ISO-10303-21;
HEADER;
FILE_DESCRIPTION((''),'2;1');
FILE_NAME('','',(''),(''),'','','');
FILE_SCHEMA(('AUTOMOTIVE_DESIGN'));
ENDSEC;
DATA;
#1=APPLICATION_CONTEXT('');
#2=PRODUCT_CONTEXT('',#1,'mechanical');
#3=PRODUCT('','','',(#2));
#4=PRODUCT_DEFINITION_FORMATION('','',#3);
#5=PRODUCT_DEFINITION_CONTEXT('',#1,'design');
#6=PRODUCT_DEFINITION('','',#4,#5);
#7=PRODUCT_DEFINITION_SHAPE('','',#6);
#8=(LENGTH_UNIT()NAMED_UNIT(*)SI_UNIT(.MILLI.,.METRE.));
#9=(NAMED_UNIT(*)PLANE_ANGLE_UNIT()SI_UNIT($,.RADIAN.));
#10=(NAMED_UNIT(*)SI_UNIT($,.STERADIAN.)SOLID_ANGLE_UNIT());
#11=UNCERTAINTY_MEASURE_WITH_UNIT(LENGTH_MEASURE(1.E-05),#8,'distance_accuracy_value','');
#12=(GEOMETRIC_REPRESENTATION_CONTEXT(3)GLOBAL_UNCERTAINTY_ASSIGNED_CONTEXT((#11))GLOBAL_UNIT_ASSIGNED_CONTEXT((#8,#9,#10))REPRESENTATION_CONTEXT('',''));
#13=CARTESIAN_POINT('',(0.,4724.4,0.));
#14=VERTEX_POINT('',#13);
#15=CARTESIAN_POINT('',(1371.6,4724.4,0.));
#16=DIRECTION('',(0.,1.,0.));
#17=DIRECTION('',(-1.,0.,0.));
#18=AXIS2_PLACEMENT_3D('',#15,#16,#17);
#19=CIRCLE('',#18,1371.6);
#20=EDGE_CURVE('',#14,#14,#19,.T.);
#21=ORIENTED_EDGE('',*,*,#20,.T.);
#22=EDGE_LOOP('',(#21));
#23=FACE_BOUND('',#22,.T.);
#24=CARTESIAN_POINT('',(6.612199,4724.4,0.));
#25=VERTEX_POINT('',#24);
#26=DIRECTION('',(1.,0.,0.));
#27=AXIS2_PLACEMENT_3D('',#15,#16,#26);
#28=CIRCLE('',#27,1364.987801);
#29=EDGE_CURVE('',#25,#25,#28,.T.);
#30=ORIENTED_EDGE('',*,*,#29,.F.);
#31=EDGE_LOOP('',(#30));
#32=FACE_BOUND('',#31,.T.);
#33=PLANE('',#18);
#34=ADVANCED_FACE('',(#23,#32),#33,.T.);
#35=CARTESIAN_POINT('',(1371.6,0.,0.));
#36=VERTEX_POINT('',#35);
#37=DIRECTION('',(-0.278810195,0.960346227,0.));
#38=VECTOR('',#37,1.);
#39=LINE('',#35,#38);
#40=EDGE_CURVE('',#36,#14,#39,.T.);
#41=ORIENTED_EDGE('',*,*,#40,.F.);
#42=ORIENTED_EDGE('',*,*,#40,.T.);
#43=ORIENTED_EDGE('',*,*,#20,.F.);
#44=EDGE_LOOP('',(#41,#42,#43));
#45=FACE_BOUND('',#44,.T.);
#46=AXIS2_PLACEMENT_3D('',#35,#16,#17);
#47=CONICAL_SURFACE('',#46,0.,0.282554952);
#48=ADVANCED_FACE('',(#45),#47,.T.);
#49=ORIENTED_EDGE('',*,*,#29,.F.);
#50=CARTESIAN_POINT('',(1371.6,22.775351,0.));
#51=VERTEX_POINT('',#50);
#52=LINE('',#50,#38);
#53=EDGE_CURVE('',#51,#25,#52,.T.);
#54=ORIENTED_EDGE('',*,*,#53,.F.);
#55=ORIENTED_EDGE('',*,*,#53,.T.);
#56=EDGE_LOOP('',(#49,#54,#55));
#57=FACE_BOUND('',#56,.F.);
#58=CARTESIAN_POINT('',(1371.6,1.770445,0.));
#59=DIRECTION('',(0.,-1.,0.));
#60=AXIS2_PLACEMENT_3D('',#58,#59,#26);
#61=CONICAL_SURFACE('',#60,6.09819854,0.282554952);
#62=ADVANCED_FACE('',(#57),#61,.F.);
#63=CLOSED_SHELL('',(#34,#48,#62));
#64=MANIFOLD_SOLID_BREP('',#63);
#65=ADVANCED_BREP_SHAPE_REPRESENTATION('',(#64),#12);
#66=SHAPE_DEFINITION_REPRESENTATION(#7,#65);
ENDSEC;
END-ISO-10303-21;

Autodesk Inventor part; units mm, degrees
ref_plane "YZ Plane" through (0, 0, 0) normal (1, 0, 0) x (0, 1, 0)
ref_plane "XZ Plane" through (0, 0, 0) normal (0, 1, 0) x (-1, 0, 0)
ref_plane "XY Plane" through (0, 0, 0) normal (0, 0, 1) x (1, 0, 0)
sketch "Sketch1" plane through (0, 0, 0) normal (0, 0, 1) x (1, 0, 0)
  line L0 (1371.6, -350.5424) -> (1371.6, 5034.3551)
  line L1 (0, 4724.4) -> (1371.6, 4724.4)
  line L2 (1371.6, 0) -> (0, 4724.4)
  point P0 (0, 0)
revolve "Revolution1" add sketch "Sketch1" angle 360 about axis through (1371.6, -350.5424, 0) along (0, 1, 0)
shell "Shell1" thickness 6.35 removed faces 1 at (938.5915, 4724.4, 51.3525)
properties part number "cone"
